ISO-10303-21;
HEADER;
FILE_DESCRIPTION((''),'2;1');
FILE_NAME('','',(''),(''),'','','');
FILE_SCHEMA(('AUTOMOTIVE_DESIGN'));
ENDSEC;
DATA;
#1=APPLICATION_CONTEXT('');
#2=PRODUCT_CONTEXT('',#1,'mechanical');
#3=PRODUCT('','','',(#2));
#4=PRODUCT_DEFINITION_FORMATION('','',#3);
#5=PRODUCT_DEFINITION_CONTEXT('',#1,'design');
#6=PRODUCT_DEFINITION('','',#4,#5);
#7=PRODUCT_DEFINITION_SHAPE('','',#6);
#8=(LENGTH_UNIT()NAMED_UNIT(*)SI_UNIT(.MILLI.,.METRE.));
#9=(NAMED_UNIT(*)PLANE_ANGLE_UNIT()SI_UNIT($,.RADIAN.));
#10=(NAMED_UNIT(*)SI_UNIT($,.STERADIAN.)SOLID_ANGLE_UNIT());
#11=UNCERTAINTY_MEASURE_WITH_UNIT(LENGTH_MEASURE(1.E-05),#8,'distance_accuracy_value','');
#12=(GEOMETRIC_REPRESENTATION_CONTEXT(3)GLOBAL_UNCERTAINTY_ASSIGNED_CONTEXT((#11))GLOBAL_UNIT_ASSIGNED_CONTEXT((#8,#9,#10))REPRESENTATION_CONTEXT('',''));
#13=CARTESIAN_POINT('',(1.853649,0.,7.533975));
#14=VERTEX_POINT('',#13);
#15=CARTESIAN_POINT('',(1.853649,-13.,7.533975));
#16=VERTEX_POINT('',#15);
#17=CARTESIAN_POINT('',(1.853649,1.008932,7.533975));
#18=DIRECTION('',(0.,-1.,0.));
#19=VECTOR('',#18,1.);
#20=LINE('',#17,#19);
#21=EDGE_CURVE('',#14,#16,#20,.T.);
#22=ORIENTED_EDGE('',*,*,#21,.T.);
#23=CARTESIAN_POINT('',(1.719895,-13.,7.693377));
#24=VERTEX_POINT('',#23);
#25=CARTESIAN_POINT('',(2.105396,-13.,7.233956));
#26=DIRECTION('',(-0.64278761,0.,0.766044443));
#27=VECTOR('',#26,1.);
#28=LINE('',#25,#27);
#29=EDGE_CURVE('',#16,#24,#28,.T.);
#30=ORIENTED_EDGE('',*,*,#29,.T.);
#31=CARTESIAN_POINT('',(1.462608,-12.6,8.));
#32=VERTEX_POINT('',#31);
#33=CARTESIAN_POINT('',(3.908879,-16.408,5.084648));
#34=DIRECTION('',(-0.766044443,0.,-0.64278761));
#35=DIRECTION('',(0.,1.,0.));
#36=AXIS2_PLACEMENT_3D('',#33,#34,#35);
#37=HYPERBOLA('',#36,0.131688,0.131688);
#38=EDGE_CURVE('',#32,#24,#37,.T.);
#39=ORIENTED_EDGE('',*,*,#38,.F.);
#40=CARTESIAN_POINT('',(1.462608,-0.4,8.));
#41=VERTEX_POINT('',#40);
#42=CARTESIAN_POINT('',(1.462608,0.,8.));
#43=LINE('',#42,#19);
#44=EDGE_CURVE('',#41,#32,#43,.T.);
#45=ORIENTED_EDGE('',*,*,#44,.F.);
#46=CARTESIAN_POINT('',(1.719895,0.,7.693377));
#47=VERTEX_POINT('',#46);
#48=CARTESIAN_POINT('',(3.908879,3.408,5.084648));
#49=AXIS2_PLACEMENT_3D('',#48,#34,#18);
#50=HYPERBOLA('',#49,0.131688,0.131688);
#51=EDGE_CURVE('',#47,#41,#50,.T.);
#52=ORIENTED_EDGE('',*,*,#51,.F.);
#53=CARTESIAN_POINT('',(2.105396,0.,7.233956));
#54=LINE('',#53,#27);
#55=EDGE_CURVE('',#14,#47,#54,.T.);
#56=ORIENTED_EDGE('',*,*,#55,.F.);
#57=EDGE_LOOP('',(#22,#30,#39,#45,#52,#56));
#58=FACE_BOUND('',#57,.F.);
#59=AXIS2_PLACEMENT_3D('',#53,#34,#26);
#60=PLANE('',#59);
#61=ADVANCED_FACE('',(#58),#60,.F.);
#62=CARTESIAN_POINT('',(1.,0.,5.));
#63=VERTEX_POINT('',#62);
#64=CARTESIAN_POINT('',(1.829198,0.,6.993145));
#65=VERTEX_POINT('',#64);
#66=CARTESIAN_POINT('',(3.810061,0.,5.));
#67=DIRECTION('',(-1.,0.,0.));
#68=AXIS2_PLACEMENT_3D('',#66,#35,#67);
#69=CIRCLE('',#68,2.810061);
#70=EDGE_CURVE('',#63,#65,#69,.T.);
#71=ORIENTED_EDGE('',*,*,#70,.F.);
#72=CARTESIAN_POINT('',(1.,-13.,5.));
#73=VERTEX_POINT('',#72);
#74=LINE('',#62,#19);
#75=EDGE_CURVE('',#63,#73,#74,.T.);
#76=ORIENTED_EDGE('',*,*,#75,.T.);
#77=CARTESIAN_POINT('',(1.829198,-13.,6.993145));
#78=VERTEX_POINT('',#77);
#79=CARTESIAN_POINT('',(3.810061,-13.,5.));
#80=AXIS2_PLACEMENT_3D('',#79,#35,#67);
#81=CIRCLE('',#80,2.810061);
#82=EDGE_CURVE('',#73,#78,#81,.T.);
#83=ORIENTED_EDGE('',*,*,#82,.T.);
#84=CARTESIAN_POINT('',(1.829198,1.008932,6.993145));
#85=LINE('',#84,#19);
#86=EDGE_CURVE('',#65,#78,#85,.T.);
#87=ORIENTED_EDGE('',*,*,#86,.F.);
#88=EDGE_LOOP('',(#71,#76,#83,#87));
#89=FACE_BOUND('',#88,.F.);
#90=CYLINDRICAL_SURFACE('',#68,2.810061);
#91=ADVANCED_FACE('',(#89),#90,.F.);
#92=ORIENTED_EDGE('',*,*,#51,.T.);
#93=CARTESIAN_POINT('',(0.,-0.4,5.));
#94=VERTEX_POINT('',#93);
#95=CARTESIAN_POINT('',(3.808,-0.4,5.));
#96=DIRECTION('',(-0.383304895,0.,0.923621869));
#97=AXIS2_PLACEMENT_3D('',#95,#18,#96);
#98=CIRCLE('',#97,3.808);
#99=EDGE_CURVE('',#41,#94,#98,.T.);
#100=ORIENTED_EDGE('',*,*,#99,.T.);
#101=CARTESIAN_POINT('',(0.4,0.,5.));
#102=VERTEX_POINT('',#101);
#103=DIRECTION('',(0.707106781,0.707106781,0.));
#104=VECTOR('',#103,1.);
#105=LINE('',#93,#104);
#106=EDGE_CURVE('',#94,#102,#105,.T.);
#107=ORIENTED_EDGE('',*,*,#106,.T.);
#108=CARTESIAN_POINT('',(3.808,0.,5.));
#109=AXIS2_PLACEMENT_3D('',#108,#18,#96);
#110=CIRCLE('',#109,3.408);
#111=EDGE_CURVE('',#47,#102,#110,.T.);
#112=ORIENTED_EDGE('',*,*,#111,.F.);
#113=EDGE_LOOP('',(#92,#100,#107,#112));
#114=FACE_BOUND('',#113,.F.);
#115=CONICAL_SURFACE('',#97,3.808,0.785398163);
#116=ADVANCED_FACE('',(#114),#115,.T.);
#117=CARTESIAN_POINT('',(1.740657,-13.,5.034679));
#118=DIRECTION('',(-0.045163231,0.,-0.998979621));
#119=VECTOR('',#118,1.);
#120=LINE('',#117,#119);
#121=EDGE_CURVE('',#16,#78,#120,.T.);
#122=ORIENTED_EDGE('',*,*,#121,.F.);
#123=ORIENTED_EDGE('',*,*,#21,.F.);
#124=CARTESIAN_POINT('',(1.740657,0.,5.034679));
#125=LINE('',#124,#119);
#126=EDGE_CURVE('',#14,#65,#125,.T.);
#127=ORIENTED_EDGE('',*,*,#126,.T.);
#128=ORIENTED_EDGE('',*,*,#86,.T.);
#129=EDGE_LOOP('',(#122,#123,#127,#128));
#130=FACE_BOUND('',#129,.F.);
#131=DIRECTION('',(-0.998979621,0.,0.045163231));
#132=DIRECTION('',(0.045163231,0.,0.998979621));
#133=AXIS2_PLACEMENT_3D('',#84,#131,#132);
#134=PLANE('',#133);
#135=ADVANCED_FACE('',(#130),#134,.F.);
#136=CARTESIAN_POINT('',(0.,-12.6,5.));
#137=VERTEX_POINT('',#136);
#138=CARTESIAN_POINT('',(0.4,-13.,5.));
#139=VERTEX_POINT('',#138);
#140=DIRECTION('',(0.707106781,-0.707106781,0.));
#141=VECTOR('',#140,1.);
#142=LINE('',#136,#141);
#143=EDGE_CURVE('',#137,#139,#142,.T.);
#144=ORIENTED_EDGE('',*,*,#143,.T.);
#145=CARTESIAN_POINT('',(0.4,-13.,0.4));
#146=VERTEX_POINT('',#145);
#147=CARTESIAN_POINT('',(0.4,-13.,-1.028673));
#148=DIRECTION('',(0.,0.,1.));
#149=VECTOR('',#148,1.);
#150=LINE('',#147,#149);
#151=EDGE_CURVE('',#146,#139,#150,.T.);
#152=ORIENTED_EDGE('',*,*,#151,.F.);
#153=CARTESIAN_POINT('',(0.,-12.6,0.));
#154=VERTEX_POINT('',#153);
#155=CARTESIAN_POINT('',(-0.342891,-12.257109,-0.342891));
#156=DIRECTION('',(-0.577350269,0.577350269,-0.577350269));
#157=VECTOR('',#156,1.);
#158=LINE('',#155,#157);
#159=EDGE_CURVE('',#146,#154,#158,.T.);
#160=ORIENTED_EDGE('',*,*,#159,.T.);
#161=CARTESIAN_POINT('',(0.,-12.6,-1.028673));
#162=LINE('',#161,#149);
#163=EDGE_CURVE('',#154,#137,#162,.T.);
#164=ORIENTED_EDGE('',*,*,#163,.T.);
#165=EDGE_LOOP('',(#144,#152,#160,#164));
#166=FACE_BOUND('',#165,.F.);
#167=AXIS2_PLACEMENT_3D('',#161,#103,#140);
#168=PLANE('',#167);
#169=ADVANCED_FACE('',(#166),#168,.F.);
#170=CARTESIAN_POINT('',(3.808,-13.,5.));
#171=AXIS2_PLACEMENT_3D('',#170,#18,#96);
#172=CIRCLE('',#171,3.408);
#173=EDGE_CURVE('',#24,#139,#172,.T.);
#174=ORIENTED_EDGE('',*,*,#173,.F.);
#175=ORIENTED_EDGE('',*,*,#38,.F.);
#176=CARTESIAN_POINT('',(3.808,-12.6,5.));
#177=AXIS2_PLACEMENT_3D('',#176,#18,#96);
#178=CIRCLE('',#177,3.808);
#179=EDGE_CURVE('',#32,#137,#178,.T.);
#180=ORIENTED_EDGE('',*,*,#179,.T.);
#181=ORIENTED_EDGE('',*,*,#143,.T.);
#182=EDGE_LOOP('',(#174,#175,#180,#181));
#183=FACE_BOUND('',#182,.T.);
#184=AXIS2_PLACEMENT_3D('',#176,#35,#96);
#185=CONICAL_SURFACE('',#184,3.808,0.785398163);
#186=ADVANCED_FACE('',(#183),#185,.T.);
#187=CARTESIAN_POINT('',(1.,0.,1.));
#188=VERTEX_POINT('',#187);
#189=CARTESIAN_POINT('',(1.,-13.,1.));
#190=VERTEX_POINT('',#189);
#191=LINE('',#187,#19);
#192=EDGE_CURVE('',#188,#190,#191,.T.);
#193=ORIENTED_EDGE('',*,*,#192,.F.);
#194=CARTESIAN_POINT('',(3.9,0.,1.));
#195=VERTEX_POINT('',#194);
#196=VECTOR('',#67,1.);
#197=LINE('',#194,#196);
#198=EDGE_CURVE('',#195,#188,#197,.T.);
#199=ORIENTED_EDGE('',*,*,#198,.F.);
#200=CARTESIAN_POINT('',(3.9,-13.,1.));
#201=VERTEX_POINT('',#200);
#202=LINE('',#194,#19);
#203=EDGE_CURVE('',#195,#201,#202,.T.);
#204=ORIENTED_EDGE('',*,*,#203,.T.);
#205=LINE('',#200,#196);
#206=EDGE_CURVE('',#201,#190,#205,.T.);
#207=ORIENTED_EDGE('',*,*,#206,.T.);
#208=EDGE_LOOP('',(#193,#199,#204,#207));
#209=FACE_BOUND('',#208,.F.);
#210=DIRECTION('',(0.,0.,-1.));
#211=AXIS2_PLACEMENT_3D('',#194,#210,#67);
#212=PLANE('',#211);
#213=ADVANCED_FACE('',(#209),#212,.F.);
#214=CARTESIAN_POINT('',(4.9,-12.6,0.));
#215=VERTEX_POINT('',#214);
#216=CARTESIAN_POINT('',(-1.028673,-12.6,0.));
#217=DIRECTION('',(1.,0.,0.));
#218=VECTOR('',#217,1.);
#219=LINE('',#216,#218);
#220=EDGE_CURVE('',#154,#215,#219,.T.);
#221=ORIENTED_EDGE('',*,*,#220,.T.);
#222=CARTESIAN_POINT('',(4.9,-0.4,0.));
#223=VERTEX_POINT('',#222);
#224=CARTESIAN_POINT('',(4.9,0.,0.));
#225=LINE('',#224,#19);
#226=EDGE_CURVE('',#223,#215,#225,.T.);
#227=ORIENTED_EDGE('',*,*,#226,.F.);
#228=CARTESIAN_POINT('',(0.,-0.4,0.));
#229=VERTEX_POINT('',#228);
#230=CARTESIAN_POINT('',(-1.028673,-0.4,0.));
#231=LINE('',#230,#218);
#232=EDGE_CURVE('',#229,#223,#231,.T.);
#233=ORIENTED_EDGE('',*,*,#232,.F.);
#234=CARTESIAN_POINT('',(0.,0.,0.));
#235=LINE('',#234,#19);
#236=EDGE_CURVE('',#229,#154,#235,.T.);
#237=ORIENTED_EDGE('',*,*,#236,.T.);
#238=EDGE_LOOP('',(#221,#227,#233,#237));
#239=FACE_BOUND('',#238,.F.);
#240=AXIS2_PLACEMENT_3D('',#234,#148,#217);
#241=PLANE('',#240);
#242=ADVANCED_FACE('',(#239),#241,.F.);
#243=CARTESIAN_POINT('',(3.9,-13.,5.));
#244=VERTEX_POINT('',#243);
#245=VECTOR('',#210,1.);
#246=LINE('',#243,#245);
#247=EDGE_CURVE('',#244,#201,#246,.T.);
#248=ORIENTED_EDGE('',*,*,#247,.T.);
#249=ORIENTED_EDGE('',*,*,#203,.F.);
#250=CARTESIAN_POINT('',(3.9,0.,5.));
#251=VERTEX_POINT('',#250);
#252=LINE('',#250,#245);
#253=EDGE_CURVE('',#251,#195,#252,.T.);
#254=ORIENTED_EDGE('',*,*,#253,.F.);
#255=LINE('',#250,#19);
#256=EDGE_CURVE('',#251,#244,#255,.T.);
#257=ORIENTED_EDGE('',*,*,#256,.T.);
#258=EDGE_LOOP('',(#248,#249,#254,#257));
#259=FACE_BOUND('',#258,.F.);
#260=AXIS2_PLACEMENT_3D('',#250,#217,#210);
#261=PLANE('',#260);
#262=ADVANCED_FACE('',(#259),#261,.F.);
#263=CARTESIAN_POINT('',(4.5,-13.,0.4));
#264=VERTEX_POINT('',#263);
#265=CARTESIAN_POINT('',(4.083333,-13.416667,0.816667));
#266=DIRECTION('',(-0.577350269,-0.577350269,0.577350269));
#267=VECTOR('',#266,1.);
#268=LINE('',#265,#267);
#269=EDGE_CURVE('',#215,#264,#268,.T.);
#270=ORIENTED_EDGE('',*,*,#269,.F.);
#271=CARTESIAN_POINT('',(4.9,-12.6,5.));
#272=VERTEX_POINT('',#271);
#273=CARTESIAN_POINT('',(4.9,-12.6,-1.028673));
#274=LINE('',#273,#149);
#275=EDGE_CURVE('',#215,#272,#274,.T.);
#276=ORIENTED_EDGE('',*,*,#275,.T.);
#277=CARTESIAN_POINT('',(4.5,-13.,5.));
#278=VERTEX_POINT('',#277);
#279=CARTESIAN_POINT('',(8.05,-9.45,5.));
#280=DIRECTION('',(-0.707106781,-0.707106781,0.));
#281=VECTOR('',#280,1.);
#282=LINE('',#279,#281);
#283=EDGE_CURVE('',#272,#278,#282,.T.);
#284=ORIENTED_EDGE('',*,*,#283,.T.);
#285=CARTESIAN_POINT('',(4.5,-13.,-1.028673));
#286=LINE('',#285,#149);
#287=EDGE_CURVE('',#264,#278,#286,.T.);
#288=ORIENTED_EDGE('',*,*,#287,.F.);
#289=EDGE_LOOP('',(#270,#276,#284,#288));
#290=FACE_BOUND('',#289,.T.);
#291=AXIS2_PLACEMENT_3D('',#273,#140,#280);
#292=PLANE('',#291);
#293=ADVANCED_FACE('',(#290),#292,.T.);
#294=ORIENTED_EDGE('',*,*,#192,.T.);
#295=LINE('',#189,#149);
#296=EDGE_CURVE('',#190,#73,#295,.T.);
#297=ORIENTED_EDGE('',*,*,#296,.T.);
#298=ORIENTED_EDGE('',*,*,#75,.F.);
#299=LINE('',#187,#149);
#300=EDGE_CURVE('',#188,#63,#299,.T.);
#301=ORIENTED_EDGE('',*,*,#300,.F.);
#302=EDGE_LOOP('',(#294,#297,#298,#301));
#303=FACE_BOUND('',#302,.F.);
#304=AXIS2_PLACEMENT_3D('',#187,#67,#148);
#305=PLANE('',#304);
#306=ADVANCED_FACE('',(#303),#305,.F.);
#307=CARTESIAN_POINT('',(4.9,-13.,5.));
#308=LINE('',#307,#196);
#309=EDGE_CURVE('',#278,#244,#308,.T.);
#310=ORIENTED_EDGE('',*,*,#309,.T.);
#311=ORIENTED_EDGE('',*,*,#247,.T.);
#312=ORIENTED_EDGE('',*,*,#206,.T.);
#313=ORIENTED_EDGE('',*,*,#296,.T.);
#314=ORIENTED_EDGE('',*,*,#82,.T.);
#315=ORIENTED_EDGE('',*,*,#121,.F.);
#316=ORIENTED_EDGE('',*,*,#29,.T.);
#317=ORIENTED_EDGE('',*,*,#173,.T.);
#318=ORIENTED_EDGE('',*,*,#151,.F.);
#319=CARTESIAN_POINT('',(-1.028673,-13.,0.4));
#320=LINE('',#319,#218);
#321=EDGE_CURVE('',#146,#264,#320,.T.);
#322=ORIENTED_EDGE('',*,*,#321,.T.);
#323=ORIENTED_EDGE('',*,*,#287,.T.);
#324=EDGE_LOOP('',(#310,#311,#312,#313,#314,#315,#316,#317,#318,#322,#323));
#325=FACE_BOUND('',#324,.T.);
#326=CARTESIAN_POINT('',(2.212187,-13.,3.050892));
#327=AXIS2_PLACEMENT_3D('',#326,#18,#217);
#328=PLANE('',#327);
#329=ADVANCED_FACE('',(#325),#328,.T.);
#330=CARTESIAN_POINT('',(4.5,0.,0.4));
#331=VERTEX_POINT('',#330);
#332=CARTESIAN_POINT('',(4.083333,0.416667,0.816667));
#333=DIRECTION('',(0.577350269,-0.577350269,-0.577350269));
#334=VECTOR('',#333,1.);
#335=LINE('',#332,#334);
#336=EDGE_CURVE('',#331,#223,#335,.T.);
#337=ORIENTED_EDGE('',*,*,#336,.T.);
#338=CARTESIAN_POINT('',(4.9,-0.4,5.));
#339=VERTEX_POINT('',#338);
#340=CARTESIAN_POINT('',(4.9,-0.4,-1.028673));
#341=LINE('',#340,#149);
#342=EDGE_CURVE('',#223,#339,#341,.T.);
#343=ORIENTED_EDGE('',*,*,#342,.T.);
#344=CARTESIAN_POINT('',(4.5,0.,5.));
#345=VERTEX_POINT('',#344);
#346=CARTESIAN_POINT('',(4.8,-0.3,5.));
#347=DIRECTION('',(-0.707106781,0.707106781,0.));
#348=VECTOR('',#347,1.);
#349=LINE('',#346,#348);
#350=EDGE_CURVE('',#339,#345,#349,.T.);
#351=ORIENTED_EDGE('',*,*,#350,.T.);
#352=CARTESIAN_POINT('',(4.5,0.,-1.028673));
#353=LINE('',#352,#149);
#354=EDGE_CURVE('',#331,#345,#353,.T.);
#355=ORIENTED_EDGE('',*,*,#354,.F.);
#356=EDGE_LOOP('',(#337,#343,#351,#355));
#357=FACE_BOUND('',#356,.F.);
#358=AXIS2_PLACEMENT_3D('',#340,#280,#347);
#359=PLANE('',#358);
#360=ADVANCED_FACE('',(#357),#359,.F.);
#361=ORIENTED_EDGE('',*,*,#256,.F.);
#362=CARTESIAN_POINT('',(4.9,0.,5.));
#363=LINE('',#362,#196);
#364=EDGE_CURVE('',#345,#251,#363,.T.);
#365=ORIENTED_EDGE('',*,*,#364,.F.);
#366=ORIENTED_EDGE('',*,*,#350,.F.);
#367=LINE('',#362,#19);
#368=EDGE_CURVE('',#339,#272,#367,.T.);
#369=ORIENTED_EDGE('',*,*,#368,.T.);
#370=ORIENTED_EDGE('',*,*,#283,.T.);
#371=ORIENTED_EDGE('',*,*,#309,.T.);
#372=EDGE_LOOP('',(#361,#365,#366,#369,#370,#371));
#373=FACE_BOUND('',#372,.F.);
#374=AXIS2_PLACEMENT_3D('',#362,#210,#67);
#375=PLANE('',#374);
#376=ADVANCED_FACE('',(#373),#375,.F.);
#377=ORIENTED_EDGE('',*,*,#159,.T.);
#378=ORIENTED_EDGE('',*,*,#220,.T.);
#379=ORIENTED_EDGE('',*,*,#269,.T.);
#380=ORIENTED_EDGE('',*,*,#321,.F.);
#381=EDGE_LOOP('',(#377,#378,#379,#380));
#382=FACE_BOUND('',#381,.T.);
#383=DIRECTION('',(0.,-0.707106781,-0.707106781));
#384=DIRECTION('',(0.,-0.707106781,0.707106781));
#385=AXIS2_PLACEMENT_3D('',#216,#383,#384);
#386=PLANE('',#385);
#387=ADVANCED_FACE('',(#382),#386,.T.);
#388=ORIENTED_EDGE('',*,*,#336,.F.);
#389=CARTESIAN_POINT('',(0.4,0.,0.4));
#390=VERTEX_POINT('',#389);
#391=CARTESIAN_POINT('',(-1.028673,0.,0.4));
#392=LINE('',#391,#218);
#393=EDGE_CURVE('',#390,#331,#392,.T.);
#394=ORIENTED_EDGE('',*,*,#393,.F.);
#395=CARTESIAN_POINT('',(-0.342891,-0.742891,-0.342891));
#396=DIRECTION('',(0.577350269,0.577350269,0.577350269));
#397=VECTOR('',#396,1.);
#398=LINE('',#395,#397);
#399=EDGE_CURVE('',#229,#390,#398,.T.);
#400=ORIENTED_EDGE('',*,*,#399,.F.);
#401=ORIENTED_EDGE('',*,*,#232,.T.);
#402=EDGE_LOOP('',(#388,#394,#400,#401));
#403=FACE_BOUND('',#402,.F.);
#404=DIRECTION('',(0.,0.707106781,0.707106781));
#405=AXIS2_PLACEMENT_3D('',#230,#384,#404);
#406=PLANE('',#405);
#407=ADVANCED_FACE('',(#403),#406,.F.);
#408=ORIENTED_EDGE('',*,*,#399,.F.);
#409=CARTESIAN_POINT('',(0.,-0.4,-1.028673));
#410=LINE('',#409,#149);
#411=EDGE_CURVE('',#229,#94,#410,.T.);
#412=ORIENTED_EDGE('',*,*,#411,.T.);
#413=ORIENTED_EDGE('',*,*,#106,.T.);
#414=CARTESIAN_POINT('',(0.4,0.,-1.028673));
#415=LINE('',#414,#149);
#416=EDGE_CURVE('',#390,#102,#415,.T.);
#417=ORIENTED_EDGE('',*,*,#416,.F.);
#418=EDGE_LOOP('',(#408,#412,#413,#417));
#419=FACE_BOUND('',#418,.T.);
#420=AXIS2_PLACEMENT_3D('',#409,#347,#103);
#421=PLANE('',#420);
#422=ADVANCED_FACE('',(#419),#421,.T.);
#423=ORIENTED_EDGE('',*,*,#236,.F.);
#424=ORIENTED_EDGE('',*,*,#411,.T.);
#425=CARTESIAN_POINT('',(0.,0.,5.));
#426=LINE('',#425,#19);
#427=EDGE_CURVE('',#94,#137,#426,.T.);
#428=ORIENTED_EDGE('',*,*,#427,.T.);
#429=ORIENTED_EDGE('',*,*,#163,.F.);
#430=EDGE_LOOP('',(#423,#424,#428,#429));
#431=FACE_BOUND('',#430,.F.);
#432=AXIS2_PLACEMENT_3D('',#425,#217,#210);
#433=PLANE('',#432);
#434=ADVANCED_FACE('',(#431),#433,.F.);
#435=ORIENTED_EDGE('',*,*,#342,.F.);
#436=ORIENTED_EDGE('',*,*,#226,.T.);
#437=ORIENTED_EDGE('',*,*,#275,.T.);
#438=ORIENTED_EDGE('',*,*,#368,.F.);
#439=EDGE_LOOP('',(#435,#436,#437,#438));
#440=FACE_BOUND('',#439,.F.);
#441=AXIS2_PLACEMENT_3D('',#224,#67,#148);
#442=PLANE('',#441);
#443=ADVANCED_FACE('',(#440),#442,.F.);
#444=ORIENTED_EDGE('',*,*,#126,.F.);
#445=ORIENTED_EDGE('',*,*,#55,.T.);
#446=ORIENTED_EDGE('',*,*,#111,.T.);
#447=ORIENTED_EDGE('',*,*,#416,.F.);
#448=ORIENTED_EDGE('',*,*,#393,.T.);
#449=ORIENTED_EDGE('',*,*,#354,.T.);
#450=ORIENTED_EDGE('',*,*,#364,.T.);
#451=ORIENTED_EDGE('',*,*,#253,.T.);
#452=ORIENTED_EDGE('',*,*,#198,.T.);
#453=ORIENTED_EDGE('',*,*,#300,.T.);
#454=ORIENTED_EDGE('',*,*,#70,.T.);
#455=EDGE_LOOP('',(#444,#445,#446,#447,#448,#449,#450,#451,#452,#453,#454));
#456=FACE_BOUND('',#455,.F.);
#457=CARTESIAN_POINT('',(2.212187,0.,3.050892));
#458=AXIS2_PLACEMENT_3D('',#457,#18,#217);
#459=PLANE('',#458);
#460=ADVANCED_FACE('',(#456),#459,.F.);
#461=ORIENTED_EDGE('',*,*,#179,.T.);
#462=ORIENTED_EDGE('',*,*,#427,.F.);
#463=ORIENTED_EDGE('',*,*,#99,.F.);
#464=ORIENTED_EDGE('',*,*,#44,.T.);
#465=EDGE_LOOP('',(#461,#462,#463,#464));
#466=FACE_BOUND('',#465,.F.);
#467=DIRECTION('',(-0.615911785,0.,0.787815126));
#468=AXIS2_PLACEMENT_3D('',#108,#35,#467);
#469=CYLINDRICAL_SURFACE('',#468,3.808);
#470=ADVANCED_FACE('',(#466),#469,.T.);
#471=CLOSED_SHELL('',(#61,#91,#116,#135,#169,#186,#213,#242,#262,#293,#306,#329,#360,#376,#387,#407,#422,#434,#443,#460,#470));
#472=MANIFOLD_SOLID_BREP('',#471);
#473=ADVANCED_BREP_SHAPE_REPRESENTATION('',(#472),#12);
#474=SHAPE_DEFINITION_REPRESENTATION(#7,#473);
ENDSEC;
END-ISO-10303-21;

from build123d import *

# Parameters (mm, degrees)
F1_DEPTH     = 13
F2_T1_DEPTH  = 6.0286731952
F2_T3_DEPTH  = 15.0178646599
F2_T5_DEPTH  = 6.9573463904
F2_T7_DEPTH  = 7.0573463904
F2_T10_ANGLE = 67.461453667
F2_T12_ANGLE = 67.461453667


# Not quite as in the source:
# - a fillet or chamfer that OpenCascade refuses, or shapes differently, is made with other operations: its cross-section is extruded or revolved along the edge and cut away or added


with BuildPart() as f1:
    # F0 (on Front) → F1 (new body)
    with BuildSketch(Plane.XZ):
        with BuildLine():
            Line((0, 5), (0, 0))
            Line((0, 0), (4.9, 0))
            Line((4.9, 0), (4.9, 5))
            Line((4.9, 5), (3.9, 5))
            Line((3.9, 5), (3.9, 1))
            Line((3.9, 1), (1, 1))
            Line((1, 1), (1, 5))
            ThreePointArc((1, 5), (1.2914644914, 6.2462400161), (2.1053955316, 7.2339555569))
            Line((2.1053955316, 7.2339555569), (1.4626079219, 8))
            ThreePointArc((1.4626079219, 8), (0.3851271545, 6.6687736465), (0, 5))
        make_face()
    extrude(amount=F1_DEPTH)

    # F2: chamfer of 0.4 on 9 edges, made by hand

    # F2_s2 → F2_t1 (cut)
    with BuildSketch(Plane.XY.offset(-1.0286731952)):
        Polygon((0, -12.6), (0.4, -13), (0, -13), align=None)
        Polygon((0, -0.4), (0.4, 0), (0, 0), align=None)
    extrude(amount=F2_T1_DEPTH, mode=Mode.SUBTRACT)

    # F2_s4 → F2_t3 (cut)
    with BuildSketch(Plane.XZ.offset(-1.00893233)):
        with BuildLine():
            Line((1.8291984844, 6.9931446867), (1.8536490905, 7.5339752825))
            Line((1.8536490905, 7.5339752825), (2.1053955316, 7.2339555569))
            ThreePointArc((2.1053955316, 7.2339555569), (1.9591897538, 7.1144071406), (1.8291984844, 6.9931446867))
        make_face()
    extrude(amount=F2_T3_DEPTH, mode=Mode.SUBTRACT)

    # F2_s6 → F2_t5 (cut)
    with BuildSketch(Plane.YZ.offset(-1.0286731952)):
        Polygon((-0.4, 0), (0, 0.4), (0, 0), align=None)
        Polygon((-12.6, 0), (-13, 0.4), (-13, 0), align=None)
    extrude(amount=F2_T5_DEPTH, mode=Mode.SUBTRACT)

    # F2_s8 → F2_t7 (cut)
    with BuildSketch(Plane.XY.offset(-1.0286731952)):
        Polygon((4.9, -0.4), (4.5, 0), (4.9, 0), align=None)
        Polygon((4.9, -12.6), (4.5, -13), (4.9, -13), align=None)
    extrude(amount=F2_T7_DEPTH, mode=Mode.SUBTRACT)

    # F2_s9 → F2_t10 (revolve, cut)
    with BuildSketch(Plane(origin=(5.0186624957, 0, 2.0827548228), x_dir=(0, 1, 0), z_dir=(0.9236218692, 0, 0.3833048953))):
        Polygon((-0.4, 6.9664843046), (0, 6.5664843046), (0, 6.9664843046), align=None)
    revolve(axis=Axis((3.808, 0, 5), (0, -1, 0)), revolution_arc=F2_T10_ANGLE, mode=Mode.SUBTRACT)

    # F2_s11 → F2_t12 (revolve, cut)
    with BuildSketch(Plane(origin=(5.0186624957, 0, 2.0827548228), x_dir=(0, 1, 0), z_dir=(0.9236218692, 0, 0.3833048953))):
        Polygon((-12.6, 6.9664843046), (-13, 6.5664843046), (-13, 6.9664843046), align=None)
    revolve(axis=Axis((3.808, -13, 5), (0, -1, 0)), revolution_arc=F2_T12_ANGLE, mode=Mode.SUBTRACT)


solid = f1.part
